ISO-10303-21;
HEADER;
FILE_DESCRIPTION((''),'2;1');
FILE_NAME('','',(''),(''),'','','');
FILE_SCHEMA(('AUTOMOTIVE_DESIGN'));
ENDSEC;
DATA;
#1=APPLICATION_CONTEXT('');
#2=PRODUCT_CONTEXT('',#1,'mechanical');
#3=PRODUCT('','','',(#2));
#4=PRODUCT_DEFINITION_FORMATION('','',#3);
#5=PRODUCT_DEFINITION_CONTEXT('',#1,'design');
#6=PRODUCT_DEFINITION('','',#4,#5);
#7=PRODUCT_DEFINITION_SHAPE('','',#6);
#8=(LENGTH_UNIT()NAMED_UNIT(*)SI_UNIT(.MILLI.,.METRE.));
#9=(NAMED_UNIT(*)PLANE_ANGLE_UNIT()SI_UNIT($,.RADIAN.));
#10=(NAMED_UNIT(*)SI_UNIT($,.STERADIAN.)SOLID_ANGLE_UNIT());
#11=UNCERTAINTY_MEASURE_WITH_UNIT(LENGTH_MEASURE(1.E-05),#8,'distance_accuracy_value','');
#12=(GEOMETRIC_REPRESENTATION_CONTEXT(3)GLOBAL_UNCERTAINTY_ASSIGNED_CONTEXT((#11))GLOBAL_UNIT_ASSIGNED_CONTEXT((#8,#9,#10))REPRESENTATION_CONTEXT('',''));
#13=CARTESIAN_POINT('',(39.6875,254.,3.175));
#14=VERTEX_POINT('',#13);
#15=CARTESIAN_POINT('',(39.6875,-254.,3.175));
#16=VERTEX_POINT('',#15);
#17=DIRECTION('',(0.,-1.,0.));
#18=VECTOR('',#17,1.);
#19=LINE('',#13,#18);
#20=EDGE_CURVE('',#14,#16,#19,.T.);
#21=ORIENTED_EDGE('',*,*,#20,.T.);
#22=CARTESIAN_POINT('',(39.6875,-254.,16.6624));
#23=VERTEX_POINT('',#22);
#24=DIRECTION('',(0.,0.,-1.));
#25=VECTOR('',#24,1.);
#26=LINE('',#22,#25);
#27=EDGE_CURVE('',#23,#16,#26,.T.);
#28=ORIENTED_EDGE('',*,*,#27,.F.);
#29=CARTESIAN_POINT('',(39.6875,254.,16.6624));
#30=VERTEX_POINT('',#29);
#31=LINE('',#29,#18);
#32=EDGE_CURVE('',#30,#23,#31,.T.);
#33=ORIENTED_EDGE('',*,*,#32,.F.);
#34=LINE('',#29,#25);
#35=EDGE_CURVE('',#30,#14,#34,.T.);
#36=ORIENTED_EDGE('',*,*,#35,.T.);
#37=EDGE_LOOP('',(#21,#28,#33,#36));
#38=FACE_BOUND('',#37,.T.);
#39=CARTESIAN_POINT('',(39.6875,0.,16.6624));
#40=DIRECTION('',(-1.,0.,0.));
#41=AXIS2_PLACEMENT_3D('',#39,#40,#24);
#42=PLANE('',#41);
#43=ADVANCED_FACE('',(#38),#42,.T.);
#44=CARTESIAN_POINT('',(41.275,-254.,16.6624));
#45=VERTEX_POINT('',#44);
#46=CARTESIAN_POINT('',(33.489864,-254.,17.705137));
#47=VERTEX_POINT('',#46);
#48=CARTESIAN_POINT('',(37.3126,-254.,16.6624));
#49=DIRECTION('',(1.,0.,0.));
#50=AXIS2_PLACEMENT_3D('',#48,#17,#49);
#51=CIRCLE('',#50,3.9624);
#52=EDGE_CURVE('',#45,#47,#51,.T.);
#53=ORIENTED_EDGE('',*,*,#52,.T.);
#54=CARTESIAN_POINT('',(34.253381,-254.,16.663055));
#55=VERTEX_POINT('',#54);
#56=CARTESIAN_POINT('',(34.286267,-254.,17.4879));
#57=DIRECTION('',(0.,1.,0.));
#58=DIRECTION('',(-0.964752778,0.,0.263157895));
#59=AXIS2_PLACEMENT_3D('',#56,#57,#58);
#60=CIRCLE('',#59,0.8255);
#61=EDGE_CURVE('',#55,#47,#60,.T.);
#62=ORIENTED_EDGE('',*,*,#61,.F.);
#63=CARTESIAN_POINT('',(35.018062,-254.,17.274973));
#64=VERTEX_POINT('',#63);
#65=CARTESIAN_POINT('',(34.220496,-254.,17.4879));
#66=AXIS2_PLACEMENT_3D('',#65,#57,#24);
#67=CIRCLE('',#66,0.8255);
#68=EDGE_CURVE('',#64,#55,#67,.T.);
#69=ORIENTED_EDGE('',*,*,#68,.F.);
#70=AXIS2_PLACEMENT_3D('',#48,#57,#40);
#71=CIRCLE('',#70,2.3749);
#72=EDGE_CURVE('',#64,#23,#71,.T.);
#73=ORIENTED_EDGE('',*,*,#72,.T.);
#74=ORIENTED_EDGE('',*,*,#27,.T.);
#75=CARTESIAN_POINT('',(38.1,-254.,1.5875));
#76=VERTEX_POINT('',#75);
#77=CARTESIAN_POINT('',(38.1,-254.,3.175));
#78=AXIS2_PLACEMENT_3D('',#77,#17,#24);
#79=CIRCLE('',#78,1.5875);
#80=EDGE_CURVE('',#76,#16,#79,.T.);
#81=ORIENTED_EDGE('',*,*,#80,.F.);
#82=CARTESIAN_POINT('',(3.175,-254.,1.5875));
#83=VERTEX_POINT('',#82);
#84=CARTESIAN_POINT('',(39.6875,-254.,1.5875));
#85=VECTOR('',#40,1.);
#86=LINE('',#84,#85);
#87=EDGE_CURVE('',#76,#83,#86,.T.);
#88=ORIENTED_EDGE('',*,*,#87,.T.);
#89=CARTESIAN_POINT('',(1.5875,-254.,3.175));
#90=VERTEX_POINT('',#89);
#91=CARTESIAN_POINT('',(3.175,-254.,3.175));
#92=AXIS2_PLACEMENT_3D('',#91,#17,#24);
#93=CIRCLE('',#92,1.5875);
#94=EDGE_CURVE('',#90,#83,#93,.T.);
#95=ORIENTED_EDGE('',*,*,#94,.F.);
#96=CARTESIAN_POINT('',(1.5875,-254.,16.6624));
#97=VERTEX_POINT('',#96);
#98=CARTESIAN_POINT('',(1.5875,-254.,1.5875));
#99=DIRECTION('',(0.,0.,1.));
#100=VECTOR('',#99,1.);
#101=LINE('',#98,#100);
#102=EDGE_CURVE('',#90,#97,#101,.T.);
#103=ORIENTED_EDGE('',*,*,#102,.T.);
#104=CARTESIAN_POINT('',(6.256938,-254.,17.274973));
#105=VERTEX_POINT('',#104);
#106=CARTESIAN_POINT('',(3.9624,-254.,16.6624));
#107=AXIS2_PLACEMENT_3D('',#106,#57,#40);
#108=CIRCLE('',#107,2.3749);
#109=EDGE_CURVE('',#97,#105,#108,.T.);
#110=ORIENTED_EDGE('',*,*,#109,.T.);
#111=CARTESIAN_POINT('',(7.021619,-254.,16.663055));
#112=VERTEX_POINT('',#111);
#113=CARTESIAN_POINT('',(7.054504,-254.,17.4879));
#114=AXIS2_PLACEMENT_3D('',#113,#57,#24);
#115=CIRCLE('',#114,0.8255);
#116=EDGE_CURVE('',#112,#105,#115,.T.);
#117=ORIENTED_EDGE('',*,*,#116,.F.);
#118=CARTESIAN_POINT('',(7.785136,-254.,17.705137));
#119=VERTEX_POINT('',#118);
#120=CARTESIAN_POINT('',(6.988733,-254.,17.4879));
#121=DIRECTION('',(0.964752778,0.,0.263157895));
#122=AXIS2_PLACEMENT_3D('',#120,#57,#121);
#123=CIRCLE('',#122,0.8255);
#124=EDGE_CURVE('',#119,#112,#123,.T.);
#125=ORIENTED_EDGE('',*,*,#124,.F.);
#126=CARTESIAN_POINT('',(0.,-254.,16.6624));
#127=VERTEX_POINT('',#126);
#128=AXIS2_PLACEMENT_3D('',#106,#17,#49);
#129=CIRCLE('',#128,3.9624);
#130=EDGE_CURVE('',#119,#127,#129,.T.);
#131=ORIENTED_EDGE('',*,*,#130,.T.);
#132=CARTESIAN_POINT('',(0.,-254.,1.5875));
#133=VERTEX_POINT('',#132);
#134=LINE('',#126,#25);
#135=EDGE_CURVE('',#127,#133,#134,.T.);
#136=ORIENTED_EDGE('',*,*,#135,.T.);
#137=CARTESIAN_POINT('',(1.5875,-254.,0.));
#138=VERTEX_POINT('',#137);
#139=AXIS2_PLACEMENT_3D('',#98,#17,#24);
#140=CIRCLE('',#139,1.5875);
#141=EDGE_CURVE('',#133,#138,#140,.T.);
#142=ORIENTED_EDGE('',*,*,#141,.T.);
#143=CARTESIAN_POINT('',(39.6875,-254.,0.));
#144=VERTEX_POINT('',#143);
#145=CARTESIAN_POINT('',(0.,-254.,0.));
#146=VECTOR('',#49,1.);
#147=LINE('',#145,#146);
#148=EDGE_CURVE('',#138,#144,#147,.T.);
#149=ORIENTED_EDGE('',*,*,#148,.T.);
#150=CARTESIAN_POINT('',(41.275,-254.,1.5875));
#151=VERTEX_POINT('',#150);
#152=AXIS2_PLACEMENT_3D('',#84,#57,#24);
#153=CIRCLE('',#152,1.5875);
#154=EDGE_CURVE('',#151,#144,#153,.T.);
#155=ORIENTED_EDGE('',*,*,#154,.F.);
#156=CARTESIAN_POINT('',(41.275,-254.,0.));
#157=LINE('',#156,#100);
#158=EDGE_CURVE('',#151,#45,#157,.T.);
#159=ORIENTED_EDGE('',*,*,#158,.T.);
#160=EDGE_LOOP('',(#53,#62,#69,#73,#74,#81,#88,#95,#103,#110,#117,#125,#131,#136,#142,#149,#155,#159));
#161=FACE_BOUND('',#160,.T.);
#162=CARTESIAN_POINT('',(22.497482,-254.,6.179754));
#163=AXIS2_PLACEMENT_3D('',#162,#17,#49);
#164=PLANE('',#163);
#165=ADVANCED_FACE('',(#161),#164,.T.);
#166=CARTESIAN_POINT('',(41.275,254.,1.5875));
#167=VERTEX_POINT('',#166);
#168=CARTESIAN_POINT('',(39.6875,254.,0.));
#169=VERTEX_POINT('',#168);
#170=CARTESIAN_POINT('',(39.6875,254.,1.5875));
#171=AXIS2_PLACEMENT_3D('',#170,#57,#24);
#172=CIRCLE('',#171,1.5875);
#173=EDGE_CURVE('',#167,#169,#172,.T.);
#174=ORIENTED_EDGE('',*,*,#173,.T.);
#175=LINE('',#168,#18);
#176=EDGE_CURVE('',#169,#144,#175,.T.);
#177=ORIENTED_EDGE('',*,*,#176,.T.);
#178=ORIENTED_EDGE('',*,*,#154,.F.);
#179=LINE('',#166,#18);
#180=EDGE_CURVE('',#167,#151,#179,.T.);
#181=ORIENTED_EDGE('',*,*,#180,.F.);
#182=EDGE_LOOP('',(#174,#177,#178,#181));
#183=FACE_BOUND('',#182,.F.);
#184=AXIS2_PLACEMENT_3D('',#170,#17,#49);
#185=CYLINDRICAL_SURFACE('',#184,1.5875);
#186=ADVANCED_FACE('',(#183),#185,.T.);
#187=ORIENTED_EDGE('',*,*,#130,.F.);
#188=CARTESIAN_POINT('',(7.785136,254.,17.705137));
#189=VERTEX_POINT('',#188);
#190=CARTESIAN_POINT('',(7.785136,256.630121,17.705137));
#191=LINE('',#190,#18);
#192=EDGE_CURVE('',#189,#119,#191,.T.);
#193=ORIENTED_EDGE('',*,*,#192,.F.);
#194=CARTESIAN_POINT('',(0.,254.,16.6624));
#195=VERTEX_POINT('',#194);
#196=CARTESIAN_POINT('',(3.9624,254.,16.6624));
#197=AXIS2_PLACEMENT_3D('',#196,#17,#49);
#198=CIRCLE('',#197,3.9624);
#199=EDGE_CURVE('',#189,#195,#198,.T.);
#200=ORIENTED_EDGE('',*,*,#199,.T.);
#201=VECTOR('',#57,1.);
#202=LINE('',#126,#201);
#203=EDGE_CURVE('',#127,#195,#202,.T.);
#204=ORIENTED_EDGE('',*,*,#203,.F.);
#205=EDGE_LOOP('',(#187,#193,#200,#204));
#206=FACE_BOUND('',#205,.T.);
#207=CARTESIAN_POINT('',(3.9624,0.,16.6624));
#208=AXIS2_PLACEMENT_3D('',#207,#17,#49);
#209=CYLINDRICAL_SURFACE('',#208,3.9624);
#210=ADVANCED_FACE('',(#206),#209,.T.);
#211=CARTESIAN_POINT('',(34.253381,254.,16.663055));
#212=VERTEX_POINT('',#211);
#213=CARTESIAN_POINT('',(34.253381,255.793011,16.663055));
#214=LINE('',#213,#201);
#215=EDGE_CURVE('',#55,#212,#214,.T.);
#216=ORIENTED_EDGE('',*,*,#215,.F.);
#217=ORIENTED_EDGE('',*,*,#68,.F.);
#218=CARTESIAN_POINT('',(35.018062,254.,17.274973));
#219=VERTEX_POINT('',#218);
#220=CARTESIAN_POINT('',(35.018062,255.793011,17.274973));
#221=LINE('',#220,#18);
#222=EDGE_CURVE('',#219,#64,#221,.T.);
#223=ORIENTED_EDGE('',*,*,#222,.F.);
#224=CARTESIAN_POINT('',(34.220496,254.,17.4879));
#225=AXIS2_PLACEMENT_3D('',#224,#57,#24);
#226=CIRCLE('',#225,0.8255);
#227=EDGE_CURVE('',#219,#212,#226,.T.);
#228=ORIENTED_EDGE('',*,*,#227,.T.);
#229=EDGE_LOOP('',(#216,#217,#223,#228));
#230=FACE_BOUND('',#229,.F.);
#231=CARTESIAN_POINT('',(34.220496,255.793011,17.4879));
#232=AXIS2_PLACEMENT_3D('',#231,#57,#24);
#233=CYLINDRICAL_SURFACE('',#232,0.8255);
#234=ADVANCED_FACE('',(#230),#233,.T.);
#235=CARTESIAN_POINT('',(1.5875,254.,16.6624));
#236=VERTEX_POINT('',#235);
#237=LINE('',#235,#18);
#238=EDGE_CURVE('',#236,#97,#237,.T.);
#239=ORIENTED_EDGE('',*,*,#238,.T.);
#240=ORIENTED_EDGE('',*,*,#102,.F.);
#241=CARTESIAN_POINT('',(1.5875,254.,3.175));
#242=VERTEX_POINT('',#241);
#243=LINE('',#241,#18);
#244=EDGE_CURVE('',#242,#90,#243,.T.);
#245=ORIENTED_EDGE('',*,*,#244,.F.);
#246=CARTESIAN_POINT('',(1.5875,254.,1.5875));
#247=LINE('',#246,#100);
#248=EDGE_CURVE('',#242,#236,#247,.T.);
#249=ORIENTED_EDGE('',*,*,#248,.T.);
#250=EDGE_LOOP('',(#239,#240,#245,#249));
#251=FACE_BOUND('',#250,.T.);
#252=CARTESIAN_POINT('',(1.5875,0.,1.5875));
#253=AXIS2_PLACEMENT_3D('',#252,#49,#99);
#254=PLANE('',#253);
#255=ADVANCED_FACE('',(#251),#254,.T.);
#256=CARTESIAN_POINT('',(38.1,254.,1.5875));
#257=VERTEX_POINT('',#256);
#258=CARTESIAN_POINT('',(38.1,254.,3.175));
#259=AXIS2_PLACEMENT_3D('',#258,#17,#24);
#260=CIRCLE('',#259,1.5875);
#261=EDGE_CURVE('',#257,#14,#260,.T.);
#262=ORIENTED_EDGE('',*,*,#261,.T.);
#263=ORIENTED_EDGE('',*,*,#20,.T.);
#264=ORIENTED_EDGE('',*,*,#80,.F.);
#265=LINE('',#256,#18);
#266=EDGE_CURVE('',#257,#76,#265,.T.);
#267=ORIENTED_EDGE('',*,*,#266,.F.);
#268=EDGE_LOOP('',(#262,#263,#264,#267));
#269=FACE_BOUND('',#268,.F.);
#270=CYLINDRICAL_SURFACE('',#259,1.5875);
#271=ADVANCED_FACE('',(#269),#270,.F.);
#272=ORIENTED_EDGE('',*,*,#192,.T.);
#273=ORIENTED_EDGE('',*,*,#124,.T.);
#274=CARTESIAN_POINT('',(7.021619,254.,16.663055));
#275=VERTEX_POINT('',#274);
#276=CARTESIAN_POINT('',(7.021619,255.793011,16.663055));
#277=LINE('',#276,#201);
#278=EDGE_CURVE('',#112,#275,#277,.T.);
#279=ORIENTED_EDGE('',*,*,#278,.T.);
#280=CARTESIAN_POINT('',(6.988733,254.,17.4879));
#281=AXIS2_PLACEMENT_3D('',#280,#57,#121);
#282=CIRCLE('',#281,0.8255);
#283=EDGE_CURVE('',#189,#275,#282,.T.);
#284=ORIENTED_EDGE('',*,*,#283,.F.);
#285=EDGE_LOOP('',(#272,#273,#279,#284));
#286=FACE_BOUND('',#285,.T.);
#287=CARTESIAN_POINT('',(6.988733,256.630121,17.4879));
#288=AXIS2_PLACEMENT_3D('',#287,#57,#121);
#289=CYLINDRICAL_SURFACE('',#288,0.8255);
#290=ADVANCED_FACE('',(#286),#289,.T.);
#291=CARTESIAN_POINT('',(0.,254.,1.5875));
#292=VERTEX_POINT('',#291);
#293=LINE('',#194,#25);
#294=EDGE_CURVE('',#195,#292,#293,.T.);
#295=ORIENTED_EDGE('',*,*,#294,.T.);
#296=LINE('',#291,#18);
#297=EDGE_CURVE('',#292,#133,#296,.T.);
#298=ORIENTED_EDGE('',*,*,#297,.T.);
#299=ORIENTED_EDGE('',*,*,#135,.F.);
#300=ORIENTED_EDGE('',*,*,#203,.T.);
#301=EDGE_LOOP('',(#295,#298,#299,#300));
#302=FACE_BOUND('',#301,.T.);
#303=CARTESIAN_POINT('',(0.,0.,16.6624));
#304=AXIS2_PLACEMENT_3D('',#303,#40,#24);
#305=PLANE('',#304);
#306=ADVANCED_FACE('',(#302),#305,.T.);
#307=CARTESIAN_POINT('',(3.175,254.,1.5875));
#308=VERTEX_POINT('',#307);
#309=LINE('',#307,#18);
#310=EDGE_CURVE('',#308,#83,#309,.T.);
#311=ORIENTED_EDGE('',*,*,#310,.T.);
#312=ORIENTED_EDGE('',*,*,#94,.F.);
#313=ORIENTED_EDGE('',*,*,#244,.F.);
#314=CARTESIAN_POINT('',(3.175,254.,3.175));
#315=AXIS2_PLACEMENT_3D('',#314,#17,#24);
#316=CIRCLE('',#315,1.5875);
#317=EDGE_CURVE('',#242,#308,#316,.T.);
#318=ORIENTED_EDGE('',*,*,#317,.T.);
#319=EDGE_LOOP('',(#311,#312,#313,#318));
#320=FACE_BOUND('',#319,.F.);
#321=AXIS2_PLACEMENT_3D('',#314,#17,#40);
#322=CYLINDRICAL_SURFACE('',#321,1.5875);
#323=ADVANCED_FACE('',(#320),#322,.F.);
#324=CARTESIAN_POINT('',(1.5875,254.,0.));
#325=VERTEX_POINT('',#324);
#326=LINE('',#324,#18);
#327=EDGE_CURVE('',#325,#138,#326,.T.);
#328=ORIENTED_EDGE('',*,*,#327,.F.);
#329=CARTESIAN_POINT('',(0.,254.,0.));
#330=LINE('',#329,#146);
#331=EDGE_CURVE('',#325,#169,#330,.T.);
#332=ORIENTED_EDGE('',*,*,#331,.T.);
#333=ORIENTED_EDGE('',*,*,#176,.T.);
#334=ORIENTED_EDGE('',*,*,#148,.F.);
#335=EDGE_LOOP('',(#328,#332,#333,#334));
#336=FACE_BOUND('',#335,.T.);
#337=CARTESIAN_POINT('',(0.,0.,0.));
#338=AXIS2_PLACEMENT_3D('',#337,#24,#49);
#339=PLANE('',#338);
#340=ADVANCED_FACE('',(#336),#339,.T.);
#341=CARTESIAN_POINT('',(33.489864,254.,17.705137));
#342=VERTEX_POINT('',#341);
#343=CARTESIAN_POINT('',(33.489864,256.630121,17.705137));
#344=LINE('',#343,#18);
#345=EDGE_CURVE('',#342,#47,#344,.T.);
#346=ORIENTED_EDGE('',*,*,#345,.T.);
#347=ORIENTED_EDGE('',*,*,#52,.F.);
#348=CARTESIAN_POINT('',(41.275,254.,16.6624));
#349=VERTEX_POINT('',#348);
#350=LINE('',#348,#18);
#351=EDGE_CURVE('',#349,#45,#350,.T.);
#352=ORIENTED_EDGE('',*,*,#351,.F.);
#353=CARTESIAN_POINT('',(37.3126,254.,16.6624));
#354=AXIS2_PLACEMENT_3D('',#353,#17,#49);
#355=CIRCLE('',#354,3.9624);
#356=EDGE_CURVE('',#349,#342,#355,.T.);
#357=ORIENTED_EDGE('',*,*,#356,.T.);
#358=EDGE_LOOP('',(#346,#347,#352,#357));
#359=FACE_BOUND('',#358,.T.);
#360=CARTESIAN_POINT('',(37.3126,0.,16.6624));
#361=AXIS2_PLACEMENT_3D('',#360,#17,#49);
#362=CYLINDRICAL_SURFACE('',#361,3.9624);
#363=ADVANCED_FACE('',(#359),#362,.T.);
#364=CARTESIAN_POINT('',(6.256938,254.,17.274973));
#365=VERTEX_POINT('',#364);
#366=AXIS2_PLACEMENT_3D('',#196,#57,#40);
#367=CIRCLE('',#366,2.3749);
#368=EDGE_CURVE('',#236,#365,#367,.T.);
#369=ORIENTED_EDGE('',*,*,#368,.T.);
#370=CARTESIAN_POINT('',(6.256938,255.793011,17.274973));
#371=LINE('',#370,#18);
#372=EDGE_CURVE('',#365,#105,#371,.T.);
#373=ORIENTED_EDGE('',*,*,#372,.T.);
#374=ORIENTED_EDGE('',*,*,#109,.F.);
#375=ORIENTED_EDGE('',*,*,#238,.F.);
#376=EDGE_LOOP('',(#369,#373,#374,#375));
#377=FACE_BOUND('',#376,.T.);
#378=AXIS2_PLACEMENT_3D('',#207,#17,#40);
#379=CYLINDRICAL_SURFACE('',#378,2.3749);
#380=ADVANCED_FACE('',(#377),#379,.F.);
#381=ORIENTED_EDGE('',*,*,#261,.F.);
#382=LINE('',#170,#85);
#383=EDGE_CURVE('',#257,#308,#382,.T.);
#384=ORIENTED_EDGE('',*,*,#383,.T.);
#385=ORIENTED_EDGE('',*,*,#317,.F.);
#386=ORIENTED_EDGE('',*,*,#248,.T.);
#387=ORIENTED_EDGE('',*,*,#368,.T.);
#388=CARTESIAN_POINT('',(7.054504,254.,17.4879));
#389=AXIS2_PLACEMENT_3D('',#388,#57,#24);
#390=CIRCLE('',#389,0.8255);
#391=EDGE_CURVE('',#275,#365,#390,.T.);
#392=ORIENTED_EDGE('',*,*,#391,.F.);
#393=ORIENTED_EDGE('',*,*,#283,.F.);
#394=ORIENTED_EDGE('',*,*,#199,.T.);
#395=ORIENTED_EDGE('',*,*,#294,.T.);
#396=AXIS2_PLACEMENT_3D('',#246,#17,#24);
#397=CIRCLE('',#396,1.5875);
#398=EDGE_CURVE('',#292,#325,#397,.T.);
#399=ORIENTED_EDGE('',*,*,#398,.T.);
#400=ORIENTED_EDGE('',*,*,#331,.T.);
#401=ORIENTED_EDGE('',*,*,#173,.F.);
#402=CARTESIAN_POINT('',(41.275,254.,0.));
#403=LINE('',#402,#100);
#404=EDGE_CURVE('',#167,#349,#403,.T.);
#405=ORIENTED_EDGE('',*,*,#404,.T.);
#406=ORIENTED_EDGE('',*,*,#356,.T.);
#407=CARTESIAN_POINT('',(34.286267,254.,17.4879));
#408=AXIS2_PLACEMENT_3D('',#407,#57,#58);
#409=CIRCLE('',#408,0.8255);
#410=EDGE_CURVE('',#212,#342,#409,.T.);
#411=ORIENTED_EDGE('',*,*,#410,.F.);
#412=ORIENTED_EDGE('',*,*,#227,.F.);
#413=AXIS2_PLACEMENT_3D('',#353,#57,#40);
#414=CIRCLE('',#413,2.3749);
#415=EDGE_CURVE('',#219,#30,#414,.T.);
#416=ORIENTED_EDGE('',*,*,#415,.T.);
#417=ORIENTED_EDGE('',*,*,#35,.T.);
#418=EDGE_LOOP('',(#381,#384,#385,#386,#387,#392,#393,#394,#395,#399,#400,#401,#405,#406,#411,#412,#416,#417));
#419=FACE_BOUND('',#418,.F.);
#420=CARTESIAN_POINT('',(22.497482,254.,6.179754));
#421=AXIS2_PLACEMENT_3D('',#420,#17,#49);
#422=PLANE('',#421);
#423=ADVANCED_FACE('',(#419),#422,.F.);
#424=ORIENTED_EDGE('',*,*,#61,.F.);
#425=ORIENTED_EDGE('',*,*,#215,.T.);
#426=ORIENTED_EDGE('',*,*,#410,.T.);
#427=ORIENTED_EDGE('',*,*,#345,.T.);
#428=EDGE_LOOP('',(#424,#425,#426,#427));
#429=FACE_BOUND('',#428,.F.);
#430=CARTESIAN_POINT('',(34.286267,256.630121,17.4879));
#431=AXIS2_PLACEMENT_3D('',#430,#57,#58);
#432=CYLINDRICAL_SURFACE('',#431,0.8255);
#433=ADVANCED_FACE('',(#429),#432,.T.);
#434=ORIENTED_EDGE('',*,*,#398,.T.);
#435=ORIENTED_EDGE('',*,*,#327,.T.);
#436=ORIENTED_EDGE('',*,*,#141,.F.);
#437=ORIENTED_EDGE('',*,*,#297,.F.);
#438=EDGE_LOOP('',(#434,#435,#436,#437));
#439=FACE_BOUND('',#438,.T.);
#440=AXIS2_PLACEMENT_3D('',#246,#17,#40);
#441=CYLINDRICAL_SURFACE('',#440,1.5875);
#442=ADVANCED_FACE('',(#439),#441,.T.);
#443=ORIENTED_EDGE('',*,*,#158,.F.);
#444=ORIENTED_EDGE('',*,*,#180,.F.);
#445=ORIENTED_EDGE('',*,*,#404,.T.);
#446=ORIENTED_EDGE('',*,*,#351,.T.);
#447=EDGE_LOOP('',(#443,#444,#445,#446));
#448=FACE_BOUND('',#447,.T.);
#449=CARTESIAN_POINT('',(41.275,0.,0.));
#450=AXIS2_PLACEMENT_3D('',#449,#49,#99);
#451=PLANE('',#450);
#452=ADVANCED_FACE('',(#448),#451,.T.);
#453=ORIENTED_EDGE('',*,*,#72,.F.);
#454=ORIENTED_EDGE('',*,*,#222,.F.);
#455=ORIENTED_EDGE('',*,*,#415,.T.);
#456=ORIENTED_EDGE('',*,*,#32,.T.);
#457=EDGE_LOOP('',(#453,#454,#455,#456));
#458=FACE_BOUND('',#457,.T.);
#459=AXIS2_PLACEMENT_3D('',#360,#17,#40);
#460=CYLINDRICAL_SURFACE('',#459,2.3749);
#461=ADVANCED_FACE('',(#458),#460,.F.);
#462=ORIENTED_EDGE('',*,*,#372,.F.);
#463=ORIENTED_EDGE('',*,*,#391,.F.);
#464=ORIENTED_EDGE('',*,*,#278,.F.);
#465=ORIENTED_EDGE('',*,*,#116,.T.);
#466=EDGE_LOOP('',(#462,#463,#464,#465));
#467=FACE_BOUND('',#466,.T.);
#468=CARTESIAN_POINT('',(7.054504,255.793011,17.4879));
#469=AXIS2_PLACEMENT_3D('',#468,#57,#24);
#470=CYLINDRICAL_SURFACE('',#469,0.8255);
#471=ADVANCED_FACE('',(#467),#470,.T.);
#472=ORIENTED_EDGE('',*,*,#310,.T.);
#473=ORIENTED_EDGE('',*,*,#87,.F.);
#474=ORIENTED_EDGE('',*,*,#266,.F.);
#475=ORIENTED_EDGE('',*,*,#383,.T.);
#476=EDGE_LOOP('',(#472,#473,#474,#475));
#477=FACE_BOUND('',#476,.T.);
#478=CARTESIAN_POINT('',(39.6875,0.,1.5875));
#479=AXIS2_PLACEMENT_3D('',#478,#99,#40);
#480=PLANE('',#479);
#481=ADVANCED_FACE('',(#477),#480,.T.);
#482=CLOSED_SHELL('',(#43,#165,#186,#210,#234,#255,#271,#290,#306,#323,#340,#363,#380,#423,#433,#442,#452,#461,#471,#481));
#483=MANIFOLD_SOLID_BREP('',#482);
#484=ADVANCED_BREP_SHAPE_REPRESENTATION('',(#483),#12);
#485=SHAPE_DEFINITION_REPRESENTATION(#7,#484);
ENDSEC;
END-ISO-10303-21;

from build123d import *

# Parameters (mm, degrees)
F1_DEPTH    = 254
F2_R        = 1.5875
F3_T1_DEPTH = 511.5860222341
F3_T3_DEPTH = 513.2602424874


# Not quite as in the source:
# - a fillet or chamfer that OpenCascade refuses, or shapes differently, is made with other operations: its cross-section is extruded or revolved along the edge and cut away or added


with BuildPart() as f1:
    # F0 (on Front) → F1 (new body, symmetric)
    with BuildSketch(Plane.XZ):
        with BuildLine():
            Line((0, 16.6624), (0, 0))
            Line((0, 0), (41.275, 0))
            Line((41.275, 0), (41.275, 16.6624))
            ThreePointArc((41.275, 16.6624), (37.3126, 20.6248), (33.3502, 16.6624))
            Line((33.3502, 16.6624), (34.9377, 16.6624))
            ThreePointArc((34.9377, 16.6624), (37.3126, 19.0373), (39.6875, 16.6624))
            Line((39.6875, 16.6624), (39.6875, 1.5875))
            Line((39.6875, 1.5875), (1.5875, 1.5875))
            Line((1.5875, 1.5875), (1.5875, 16.6624))
            Line((1.5875, 16.6624), (0, 16.6624))
        make_face()
        with BuildLine():
            ThreePointArc((7.9248, 16.6624), (3.9624, 20.6248), (0, 16.6624))
            Line((0, 16.6624), (1.5875, 16.6624))
            ThreePointArc((1.5875, 16.6624), (3.9624, 19.0373), (6.3373, 16.6624))
            Line((6.3373, 16.6624), (7.9248, 16.6624))
        make_face()
    extrude(amount=F1_DEPTH, both=True)

    # F2
    f2_edges = [f1.edges().sort_by_distance(p)[0] for p in [
        (0, 0, 0),
        (41.275, 0, 0),
        (39.6875, 0, 1.5875),
        (1.5875, 0, 1.5875),
    ]]
    fillet(f2_edges, radius=F2_R)

    # F3: fillet of radius 0.8255 on 4 edges, made by hand

    # F3_s2 → F3_t1 (cut)
    with BuildSketch(Plane.XZ.offset(-255.793011117)):
        with BuildLine():
            ThreePointArc((34.2204955532, 16.6624), (34.723327211, 16.8332164322), (35.0180621764, 17.2749734127))
            ThreePointArc((35.0180621764, 17.2749734127), (34.957876249, 16.9713110978), (34.9377, 16.6624))
            Line((34.9377, 16.6624), (34.2204955532, 16.6624))
        make_face()
        with BuildLine():
            ThreePointArc((7.0545044468, 16.6624), (6.551672789, 16.8332164322), (6.2569378236, 17.2749734127))
            ThreePointArc((6.2569378236, 17.2749734127), (6.317123751, 16.9713110978), (6.3373, 16.6624))
            Line((6.3373, 16.6624), (7.0545044468, 16.6624))
        make_face()
    extrude(amount=F3_T1_DEPTH, mode=Mode.SUBTRACT)

    # F3_s4 → F3_t3 (cut)
    with BuildSketch(Plane.XZ.offset(-256.6301212437)):
        with BuildLine():
            ThreePointArc((33.4898635929, 17.7051368421), (33.6302261346, 16.9868405041), (34.2862670111, 16.6624))
            Line((34.2862670111, 16.6624), (33.3502, 16.6624))
            ThreePointArc((33.3502, 16.6624), (33.385271105, 17.1884242487), (33.4898635929, 17.7051368421))
        make_face()
        with BuildLine():
            ThreePointArc((7.7851364071, 17.7051368421), (7.6447738654, 16.9868405041), (6.9887329889, 16.6624))
            Line((6.9887329889, 16.6624), (7.9248, 16.6624))
            ThreePointArc((7.9248, 16.6624), (7.889728895, 17.1884242487), (7.7851364071, 17.7051368421))
        make_face()
    extrude(amount=F3_T3_DEPTH, mode=Mode.SUBTRACT)


solid = f1.part
